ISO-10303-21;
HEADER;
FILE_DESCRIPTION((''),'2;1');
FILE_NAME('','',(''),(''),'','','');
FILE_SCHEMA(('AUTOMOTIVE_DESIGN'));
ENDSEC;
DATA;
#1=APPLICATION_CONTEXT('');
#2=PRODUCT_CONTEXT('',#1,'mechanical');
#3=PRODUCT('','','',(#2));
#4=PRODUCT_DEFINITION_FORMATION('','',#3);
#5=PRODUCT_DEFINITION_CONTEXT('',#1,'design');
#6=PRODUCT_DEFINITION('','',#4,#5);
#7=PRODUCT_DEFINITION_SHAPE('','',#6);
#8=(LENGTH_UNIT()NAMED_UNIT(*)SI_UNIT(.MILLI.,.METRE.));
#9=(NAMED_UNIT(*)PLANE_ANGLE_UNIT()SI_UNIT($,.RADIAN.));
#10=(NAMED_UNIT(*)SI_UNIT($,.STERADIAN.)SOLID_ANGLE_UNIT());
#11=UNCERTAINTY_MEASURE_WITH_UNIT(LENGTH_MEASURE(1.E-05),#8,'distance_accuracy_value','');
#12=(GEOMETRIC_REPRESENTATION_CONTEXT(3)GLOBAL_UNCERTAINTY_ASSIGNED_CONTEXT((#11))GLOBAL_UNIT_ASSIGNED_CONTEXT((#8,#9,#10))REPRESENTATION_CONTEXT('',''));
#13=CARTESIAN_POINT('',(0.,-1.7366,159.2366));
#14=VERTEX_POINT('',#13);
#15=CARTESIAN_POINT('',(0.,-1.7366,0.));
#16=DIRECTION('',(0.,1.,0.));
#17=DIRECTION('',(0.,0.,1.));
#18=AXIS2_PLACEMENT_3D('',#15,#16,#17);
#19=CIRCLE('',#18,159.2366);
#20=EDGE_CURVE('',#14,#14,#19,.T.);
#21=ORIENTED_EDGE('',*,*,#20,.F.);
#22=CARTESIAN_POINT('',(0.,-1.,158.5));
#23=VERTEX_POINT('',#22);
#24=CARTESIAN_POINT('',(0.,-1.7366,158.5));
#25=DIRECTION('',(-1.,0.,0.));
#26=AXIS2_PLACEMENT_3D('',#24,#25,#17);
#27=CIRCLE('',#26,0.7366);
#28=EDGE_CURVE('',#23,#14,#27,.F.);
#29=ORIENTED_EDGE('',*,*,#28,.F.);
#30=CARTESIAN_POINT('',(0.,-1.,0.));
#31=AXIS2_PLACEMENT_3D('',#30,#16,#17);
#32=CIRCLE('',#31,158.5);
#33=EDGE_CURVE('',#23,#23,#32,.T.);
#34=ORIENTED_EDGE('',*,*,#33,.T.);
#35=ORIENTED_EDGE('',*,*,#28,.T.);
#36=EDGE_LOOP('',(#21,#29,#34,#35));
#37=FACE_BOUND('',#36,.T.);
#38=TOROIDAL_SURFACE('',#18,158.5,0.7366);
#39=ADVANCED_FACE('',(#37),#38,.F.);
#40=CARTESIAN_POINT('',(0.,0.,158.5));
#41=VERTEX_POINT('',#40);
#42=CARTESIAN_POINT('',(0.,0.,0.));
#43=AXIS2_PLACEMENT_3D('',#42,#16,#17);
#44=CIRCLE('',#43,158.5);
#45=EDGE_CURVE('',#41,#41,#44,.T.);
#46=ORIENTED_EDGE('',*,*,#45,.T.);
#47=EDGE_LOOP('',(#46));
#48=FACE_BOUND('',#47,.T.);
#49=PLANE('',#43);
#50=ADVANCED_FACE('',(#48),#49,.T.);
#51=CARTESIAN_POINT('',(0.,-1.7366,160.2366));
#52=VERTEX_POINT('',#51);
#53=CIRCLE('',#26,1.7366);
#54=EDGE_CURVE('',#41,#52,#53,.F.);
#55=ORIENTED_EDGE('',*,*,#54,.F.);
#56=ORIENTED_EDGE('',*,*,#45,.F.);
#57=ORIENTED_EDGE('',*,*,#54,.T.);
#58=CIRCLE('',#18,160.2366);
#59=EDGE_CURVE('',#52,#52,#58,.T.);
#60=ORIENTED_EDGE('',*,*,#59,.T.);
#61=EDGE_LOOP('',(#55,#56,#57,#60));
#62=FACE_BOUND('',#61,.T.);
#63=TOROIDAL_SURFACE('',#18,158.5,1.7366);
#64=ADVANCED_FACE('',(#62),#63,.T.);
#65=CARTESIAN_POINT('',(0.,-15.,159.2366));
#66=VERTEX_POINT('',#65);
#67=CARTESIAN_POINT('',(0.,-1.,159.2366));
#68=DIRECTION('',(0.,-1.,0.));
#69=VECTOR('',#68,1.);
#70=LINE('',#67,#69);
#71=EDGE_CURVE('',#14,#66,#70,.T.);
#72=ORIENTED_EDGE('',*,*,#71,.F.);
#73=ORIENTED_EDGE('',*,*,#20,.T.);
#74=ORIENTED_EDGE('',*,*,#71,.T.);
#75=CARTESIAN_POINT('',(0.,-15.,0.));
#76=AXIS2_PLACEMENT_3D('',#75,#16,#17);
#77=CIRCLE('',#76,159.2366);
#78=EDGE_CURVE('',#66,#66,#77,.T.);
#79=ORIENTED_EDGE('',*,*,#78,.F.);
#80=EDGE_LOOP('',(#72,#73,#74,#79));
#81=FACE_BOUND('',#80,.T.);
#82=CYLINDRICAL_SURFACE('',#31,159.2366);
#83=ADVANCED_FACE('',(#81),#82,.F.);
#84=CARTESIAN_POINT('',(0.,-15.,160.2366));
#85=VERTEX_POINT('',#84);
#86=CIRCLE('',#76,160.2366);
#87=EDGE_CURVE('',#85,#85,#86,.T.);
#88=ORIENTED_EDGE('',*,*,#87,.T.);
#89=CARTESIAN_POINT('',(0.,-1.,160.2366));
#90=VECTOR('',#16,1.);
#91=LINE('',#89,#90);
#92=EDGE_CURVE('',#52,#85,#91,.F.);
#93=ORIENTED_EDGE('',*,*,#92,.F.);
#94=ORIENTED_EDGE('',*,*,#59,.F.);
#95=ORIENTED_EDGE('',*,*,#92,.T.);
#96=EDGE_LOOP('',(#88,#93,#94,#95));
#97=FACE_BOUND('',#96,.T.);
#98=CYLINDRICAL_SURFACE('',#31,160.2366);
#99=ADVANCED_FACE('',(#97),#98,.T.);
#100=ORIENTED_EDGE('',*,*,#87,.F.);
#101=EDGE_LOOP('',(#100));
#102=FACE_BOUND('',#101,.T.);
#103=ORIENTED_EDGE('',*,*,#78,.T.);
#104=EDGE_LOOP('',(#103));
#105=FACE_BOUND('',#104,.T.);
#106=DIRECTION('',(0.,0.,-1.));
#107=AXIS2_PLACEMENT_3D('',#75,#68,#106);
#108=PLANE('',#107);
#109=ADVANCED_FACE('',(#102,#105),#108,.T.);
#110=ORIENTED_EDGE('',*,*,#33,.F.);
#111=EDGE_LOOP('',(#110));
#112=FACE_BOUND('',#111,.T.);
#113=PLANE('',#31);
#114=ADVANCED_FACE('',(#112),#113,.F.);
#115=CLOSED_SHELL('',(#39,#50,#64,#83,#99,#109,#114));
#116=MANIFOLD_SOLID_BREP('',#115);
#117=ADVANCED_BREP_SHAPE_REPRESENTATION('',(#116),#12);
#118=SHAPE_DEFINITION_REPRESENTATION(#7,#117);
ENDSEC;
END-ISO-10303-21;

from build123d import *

# Parameters (mm, degrees)
SKETCH1_R          = 158.5
BASE_FLANGE1_DEPTH = 1


# Read off the part's stored shape, not the designer's step: Edge-Flange1
# Sheet-metal steps are written as plain solids
with BuildPart() as part:
    # Sketch1 → Base-Flange1 (new body)
    with BuildSketch(Plane(origin=(0, 0, 0), x_dir=(1, 0, 0), z_dir=(0, 1, 0))):
        with Locations(Location((0, 0, 0), (0, 0, 270))):
            Circle(SKETCH1_R)
    extrude(amount=-BASE_FLANGE1_DEPTH)

    # Edge-Flange1 outline → Edge-Flange1 (revolve)
    with BuildSketch(Plane.XY):
        with BuildLine():
            Line((159.2366, -1.7366), (159.2366, -15))
            Line((159.2366, -15), (160.2366, -15))
            Line((160.2366, -15), (160.2366, -1.7366))
            ThreePointArc((160.2366, -1.7366), (159.727961636, -0.508638364), (158.5, 0))
            Line((158.5, 0), (158.5, -1))
            ThreePointArc((158.5, -1), (159.020854855, -1.215745145), (159.2366, -1.7366))
        make_face()
    revolve(axis=Axis((0, 0, 0), (0, 1, 0)))


solid = part.part
